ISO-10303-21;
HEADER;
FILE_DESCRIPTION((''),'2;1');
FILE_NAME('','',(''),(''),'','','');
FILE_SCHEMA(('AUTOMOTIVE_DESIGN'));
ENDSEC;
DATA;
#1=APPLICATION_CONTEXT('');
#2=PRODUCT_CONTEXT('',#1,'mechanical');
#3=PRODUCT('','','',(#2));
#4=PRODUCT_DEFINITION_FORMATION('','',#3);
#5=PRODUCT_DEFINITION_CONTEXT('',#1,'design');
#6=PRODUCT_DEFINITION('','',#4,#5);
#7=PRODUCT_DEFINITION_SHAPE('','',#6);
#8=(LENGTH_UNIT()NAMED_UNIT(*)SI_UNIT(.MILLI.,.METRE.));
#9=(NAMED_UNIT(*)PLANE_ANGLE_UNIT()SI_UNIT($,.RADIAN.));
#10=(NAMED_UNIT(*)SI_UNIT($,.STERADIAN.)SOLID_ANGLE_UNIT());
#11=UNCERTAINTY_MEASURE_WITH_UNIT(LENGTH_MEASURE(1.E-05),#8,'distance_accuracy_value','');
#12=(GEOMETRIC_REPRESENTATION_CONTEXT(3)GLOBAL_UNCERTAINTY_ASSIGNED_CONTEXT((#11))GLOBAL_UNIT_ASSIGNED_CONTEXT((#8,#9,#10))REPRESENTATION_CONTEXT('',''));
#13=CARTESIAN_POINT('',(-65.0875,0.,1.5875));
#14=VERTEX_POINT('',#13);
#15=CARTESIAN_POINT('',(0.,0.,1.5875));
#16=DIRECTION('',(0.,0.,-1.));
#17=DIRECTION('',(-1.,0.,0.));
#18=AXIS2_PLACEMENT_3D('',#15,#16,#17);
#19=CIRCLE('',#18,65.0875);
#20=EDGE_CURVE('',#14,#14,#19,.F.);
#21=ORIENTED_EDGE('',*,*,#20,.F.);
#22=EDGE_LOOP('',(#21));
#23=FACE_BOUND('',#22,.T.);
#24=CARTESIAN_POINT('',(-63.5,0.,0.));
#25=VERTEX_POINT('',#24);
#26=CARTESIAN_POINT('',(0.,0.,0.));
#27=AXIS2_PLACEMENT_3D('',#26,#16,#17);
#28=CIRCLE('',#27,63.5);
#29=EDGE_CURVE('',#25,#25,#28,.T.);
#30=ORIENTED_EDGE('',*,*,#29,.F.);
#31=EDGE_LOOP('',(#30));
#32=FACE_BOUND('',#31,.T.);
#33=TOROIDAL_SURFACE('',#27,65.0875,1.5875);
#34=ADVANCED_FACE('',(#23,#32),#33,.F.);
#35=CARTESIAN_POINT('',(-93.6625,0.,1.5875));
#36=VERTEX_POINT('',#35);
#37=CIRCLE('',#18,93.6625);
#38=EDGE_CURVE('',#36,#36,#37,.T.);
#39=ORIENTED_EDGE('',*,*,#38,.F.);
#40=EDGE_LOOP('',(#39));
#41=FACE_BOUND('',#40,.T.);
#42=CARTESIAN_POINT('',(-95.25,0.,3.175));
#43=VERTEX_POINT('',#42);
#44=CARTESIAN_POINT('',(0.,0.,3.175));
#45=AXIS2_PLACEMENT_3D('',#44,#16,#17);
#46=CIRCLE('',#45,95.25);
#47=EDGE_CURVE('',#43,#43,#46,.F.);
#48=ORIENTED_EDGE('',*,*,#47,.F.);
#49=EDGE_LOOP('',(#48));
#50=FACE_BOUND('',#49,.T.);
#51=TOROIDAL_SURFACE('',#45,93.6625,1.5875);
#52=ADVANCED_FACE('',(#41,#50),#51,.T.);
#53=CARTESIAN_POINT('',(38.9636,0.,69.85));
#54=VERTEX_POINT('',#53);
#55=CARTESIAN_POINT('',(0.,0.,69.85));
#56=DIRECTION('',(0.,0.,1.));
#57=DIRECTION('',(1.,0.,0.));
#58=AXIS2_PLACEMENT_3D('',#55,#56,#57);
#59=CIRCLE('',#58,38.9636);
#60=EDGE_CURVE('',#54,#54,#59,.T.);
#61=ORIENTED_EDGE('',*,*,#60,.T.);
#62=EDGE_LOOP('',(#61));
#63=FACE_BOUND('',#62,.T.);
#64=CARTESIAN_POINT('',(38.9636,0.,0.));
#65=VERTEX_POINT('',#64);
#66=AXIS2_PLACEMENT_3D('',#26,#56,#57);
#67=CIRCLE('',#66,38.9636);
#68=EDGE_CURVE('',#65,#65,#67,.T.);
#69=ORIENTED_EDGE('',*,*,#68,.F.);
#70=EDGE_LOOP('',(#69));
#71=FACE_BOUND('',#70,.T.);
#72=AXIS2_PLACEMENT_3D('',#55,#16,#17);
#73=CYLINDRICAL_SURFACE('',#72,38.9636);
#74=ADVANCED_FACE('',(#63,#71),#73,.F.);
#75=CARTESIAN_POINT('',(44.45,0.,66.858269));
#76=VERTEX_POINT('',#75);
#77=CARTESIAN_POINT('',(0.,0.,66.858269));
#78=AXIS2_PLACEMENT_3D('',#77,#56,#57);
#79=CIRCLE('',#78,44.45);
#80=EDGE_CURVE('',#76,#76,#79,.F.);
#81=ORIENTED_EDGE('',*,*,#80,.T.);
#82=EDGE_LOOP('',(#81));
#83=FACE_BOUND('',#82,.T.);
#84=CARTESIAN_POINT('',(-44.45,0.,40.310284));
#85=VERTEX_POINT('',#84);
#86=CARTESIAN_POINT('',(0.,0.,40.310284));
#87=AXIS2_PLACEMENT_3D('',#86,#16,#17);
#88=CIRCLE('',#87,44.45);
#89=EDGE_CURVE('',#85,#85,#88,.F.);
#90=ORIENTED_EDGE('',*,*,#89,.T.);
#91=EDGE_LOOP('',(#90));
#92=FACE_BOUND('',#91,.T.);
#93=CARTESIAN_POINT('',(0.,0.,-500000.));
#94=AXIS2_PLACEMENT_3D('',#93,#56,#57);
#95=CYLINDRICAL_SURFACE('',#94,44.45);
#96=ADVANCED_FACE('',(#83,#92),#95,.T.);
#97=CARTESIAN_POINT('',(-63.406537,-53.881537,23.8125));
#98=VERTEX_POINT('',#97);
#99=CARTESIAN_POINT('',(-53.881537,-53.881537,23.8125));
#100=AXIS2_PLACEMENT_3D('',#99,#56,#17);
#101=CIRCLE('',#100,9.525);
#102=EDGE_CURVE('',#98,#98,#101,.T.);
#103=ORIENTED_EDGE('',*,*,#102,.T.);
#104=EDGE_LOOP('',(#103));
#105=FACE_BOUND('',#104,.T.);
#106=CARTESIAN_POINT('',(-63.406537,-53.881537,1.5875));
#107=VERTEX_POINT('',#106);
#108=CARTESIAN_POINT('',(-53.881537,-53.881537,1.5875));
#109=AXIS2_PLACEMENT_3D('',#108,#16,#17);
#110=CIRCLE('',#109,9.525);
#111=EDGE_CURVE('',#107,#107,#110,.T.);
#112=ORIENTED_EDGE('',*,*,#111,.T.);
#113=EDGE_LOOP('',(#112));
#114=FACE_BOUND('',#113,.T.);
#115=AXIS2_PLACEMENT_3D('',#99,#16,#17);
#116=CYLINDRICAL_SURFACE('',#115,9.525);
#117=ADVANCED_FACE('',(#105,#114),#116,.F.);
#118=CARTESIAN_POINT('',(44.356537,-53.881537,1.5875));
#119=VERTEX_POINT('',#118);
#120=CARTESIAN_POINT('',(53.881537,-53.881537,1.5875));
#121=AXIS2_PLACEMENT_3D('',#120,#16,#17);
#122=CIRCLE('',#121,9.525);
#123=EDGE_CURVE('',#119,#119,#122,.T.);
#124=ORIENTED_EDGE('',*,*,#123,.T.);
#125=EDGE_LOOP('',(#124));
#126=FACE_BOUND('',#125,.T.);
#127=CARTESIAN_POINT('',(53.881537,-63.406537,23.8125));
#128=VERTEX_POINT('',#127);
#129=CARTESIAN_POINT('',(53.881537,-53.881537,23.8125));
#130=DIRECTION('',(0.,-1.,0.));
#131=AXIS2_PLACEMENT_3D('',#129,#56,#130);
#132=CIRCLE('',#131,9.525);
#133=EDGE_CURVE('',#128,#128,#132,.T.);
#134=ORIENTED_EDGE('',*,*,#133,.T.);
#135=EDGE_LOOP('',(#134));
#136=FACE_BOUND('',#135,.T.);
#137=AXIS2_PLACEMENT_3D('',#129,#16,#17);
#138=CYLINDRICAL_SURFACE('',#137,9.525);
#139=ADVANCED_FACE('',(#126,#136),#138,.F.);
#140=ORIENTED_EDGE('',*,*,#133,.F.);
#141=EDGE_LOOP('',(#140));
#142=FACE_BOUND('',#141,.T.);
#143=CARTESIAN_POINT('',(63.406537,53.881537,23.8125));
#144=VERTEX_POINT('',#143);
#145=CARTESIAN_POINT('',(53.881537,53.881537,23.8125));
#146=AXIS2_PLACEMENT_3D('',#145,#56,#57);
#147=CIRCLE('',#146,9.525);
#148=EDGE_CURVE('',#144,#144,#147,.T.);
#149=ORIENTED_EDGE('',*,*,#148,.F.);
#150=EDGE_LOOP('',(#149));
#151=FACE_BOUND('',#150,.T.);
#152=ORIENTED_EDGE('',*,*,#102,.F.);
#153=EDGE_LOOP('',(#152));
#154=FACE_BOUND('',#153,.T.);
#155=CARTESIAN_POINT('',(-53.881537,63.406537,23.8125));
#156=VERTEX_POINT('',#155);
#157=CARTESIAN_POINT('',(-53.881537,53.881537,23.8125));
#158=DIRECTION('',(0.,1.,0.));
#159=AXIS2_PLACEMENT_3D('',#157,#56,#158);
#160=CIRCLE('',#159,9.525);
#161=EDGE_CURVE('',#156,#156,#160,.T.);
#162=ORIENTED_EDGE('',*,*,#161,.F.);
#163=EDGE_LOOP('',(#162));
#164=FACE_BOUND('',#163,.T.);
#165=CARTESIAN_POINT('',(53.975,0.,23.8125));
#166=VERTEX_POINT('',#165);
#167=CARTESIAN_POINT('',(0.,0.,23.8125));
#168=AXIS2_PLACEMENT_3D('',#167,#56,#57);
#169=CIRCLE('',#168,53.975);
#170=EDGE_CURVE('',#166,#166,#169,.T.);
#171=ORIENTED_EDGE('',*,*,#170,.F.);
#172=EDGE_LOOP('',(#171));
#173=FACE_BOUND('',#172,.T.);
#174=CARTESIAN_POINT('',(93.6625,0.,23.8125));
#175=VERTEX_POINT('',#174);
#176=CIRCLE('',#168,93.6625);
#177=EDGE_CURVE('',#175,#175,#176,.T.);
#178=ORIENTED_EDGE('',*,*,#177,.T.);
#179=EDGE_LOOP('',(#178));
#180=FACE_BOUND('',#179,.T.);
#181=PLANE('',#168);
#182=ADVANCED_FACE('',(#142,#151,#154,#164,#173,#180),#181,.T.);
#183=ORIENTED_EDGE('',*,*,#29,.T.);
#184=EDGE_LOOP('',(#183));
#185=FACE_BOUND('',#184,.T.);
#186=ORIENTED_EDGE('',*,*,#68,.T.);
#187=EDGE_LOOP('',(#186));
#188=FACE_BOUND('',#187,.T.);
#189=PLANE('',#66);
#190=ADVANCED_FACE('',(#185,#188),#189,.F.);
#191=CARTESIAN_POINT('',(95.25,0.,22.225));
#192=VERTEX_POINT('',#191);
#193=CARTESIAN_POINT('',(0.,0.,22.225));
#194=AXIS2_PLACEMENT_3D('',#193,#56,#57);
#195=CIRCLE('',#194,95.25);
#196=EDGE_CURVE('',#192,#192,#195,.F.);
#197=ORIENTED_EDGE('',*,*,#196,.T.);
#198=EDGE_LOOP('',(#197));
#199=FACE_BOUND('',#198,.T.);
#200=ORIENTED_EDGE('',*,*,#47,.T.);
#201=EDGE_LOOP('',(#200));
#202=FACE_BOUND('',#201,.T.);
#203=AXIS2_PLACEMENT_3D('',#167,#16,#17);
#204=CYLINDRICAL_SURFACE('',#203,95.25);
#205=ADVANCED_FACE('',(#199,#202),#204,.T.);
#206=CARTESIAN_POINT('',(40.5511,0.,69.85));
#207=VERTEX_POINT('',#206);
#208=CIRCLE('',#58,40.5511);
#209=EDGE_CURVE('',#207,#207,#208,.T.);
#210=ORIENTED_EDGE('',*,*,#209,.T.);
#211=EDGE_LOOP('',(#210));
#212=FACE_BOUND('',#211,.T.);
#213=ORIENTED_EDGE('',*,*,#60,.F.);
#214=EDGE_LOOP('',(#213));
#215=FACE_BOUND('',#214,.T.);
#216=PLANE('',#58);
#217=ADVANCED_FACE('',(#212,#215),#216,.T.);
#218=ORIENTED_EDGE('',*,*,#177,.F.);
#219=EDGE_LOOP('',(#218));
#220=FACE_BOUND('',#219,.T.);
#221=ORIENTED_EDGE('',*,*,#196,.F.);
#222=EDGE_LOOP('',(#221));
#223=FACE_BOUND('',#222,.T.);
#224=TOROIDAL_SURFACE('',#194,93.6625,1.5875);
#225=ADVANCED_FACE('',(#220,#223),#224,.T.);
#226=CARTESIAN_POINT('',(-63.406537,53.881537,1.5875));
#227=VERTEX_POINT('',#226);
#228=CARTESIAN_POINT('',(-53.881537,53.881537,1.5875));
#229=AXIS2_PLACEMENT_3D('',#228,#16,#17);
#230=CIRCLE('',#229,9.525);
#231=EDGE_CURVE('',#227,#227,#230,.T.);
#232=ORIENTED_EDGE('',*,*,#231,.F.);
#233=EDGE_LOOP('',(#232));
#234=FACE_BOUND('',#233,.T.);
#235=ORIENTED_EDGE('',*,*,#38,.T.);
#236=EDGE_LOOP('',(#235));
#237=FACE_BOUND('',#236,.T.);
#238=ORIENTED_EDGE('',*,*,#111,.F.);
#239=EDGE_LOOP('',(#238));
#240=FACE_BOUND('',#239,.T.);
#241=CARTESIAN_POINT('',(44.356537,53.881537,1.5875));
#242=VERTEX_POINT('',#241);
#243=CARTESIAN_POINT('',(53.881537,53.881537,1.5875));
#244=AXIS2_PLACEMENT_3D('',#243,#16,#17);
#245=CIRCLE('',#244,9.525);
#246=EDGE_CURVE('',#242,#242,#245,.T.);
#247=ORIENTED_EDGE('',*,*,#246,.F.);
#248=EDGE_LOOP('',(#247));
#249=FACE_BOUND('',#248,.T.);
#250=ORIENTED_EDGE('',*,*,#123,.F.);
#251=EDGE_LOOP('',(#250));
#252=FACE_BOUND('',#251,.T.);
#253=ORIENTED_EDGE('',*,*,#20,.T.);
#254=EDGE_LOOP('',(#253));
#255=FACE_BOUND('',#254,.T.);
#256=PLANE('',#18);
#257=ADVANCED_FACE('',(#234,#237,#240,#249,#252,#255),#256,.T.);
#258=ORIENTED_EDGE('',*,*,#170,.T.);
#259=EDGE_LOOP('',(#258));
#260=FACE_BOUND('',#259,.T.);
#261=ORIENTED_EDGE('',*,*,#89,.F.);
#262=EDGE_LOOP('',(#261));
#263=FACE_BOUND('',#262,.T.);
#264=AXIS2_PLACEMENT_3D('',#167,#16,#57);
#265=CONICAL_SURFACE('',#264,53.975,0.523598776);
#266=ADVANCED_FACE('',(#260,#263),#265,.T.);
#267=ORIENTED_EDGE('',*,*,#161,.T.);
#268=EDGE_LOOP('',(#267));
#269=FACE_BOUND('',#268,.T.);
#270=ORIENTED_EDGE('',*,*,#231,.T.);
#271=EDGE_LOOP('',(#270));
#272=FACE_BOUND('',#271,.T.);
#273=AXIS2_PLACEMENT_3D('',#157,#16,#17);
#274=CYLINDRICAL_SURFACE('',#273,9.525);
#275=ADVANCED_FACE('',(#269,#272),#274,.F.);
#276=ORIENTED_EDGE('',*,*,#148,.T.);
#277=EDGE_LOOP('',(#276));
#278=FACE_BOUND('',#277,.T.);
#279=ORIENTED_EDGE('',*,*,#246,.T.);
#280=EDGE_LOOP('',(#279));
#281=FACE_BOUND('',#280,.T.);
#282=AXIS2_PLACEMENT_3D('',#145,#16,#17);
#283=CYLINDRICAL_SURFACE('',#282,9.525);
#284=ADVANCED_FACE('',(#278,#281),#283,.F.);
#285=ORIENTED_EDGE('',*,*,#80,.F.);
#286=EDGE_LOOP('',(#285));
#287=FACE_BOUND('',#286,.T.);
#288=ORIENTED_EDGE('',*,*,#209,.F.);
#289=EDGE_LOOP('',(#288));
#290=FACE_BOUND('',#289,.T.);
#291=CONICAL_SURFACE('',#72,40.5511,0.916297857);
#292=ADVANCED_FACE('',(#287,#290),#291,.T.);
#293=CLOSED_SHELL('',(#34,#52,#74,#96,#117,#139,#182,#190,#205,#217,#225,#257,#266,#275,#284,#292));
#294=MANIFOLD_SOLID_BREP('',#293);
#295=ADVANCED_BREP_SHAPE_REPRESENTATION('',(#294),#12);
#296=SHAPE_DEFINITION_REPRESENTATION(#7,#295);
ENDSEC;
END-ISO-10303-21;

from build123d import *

# Parameters (mm, degrees)
SKETCH1_R                 = 95.25
BOSS_EXTRUDE1_DEPTH       = 23.8125
SKETCH2_R                 = 9.525
BOLTHOLE_DEPTH            = 137.792398021
BOLTHOLEPATTERN_COUNT     = 4
SKETCH5_OUTSIDE_W         = 246.592
SKETCH5_OUTSIDE_H         = 246.592
SKETCH5_OUTSIDE_R         = 63.5
RAISED_FACE_DEPTH         = 1.5875
SKETCH8_R                 = 53.975
WELD_NECK_120_DRAFT_DEPTH = 46.0375
WELD_NECK_120_DRAFT_TAPER = 30
WELD_NECK_END_REACH       = 153.737
SKETCH9_R                 = 44.45
WELD_NECK_CHAMFER1_SIZE   = 2.991731193
WELD_NECK_CHAMFER1_SIZE2  = 3.8989
SKETCH7_R                 = 38.9636
BORE_DEPTH                = 152.737099946
FILLET2_R                 = 1.5875
FILLET3_R                 = 1.5875


with BuildPart() as part:
    # Sketch1 → Boss-Extrude1 (new body)
    with BuildSketch(Plane.XY):
        Circle(SKETCH1_R)
    extrude(amount=BOSS_EXTRUDE1_DEPTH)

    # Sketch2 → BoltHole (cut, through all)
    with BuildSketch(Plane.XY):
        with Locations((53.881536726, 53.881536726)):
            Circle(SKETCH2_R)
    bolthole = extrude(amount=BOLTHOLE_DEPTH, mode=Mode.SUBTRACT)

    # BoltHolePattern: BoltHole ×4 about axis
    boltholepattern_axis = Axis((0, 0, 0), (0, 0, 1))
    for i in range(1, BOLTHOLEPATTERN_COUNT):
        add(bolthole.rotate(boltholepattern_axis, i * 360 / BOLTHOLEPATTERN_COUNT), mode=Mode.SUBTRACT)

    # Sketch5 outside → Raised Face (cut)
    with BuildSketch(Plane(origin=(0, 0, 0), x_dir=(-1, 0, 0), z_dir=(0, 0, -1))):
        Rectangle(SKETCH5_OUTSIDE_W, SKETCH5_OUTSIDE_H)
        Circle(SKETCH5_OUTSIDE_R, mode=Mode.SUBTRACT)
    extrude(amount=-RAISED_FACE_DEPTH, mode=Mode.SUBTRACT)

    # Sketch8 → Weld Neck 120 Draft (add)
    with BuildSketch(Plane.XY.offset(23.8125)):
        Circle(SKETCH8_R)
    extrude(amount=WELD_NECK_120_DRAFT_DEPTH, taper=WELD_NECK_120_DRAFT_TAPER)

    # Sketch9 → Weld Neck End (add, up to next)
    with BuildSketch(Plane.XY.offset(69.85), mode=Mode.PRIVATE) as weld_neck_end_sk1:
        Circle(SKETCH9_R)
    weld_neck_end_tool1 = extrude(weld_neck_end_sk1.sketch, amount=-WELD_NECK_END_REACH, mode=Mode.PRIVATE) - part.part
    add(weld_neck_end_tool1.solids().sort_by_distance((0, 0, 69.85))[0])

    # Weld Neck Chamfer1
    weld_neck_chamfer1_edges = [part.edges().sort_by_distance(p)[0] for p in [
        (-44.45, 0, 69.85),
    ]]
    weld_neck_chamfer1_side = [part.faces().sort_by_distance(p)[0] for p in [
        (-44.45, 0, 55.080141971),
    ]]
    chamfer(weld_neck_chamfer1_edges, length=WELD_NECK_CHAMFER1_SIZE, length2=WELD_NECK_CHAMFER1_SIZE2, reference=weld_neck_chamfer1_side[0])

    # Sketch7 → Bore (cut, through all)
    with BuildSketch(Plane.XY):
        Circle(SKETCH7_R)
    extrude(amount=BORE_DEPTH, mode=Mode.SUBTRACT)

    # Fillet2
    fillet2_edges = [part.edges().sort_by_distance(p)[0] for p in [
        (-95.25, 0, 1.5875),
        (-95.25, 0, 23.8125),
    ]]
    fillet(fillet2_edges, radius=FILLET2_R)

    # Fillet3
    fillet3_edges = [part.edges().sort_by_distance(p)[0] for p in [
        (63.5, 0, 1.5875),
    ]]
    fillet(fillet3_edges, radius=FILLET3_R - 0.0001)  # a hair under: the kernel refuses the full size


solid = part.part
